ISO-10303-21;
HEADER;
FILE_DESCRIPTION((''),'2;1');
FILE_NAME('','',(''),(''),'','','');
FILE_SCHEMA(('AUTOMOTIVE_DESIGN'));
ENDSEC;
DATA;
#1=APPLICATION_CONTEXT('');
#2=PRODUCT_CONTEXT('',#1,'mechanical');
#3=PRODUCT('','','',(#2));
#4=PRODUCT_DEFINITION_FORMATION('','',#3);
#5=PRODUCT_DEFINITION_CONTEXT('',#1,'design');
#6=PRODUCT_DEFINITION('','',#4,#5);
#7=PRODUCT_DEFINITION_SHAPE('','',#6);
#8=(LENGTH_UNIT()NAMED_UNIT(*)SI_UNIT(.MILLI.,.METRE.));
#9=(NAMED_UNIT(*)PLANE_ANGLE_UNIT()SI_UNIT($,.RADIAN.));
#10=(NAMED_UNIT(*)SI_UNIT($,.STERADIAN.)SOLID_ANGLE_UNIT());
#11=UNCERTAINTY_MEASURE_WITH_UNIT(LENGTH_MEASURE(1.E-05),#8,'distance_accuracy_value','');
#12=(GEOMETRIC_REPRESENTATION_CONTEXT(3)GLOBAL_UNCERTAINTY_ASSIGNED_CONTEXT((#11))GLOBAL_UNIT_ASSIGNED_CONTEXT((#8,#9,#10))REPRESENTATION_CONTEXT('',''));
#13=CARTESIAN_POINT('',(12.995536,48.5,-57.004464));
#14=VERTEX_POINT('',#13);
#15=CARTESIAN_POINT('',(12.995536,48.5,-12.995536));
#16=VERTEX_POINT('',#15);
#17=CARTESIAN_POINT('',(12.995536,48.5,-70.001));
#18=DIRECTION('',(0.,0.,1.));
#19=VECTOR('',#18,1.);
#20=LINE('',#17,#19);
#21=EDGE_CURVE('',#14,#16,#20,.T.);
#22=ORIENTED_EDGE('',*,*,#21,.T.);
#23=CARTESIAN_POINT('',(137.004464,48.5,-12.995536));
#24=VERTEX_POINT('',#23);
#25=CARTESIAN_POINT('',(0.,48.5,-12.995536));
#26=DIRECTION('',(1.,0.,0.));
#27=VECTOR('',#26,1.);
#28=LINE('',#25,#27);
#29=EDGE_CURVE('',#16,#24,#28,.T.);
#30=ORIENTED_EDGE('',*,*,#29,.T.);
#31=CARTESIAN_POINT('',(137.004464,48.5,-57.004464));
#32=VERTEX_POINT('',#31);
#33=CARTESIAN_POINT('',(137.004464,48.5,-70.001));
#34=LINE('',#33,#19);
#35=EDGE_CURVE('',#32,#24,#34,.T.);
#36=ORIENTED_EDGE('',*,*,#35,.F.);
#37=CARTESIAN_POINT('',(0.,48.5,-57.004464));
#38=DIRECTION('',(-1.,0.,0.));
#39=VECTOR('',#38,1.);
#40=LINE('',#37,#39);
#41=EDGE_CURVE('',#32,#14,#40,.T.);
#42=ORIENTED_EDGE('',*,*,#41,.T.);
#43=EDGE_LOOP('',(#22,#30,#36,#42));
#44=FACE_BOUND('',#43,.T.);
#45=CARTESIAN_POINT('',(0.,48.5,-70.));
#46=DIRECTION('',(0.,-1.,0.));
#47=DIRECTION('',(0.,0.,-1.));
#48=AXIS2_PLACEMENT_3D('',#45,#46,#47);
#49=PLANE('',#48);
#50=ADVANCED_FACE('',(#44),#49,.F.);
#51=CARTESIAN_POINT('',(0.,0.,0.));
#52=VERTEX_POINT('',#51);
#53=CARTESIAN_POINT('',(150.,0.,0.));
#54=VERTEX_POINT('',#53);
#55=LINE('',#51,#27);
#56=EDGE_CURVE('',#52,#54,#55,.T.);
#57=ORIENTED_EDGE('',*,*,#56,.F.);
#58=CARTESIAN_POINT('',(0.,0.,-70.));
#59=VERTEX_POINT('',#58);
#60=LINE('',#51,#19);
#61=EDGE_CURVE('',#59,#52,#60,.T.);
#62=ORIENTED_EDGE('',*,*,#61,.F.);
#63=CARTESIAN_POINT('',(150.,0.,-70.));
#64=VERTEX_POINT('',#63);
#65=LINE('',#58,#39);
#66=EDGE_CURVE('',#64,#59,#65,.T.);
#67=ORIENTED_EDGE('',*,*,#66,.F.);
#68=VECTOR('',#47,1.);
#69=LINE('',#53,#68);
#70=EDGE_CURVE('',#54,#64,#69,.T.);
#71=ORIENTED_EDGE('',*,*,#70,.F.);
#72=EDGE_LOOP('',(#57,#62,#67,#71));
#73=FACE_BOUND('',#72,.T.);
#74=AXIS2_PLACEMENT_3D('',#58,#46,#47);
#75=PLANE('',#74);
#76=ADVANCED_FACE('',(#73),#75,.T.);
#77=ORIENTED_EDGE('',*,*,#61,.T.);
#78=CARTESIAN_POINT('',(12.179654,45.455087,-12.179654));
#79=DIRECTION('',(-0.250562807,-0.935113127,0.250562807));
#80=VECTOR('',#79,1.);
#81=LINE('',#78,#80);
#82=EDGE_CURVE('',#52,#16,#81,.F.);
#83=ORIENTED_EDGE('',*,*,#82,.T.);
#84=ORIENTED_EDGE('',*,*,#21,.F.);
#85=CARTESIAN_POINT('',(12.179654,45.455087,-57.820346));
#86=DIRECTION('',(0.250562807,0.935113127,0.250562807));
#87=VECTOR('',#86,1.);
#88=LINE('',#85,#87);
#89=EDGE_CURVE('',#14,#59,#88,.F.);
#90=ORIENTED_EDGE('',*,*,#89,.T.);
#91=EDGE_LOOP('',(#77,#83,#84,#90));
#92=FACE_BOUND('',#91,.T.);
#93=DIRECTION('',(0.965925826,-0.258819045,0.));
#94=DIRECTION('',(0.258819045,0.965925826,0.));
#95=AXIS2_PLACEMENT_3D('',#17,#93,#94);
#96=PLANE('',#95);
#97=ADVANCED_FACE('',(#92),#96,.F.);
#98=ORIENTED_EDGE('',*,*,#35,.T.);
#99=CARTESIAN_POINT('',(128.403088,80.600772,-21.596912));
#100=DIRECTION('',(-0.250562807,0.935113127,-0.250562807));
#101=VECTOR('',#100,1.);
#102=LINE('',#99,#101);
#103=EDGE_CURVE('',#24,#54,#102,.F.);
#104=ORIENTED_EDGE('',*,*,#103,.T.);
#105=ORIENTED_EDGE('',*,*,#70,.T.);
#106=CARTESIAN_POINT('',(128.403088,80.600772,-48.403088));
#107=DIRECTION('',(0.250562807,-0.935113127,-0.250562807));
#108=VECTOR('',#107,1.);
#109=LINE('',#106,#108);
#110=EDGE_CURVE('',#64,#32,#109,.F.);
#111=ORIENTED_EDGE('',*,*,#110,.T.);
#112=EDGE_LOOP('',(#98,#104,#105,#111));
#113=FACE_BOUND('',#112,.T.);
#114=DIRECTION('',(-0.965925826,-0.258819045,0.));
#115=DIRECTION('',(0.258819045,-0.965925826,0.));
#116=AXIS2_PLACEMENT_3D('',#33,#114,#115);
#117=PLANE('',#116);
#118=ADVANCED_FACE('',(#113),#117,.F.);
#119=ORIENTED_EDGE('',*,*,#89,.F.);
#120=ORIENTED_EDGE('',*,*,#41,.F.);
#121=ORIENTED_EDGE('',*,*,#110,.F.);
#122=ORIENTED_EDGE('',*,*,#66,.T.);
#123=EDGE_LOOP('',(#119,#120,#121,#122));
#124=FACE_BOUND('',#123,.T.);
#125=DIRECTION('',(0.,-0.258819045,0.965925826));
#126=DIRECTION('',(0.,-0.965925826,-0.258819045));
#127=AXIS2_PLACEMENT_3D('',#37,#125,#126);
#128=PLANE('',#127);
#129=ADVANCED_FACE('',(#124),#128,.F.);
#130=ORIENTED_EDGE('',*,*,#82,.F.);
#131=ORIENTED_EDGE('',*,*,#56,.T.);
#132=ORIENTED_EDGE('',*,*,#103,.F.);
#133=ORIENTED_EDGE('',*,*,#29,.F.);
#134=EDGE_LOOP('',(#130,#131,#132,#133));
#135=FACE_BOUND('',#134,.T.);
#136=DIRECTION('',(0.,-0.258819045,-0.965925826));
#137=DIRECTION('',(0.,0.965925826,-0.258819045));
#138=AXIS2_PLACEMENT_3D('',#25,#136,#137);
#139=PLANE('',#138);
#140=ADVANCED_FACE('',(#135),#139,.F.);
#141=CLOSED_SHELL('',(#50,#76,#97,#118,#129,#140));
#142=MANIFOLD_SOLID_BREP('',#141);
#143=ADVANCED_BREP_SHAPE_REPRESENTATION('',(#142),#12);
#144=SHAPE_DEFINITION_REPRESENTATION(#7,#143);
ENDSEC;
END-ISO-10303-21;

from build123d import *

# Parameters (mm, degrees)
ESQUISSE2_W      = 150
ESQUISSE2_H      = 70
EXTRUSION1_DEPTH = 48.5
EXTRUSION2_REACH = 174.488
CHANFREIN1_SIZE2 = 48.5
CHANFREIN1_SIZE  = 12.995535833
CHANFREIN2_SIZE2 = 48.5
CHANFREIN2_SIZE  = 12.995535833


with BuildPart() as part:
    # Esquisse2 → Extrusion1 (new body)
    with BuildSketch(Plane(origin=(0, 0, 0), x_dir=(1, 0, 0), z_dir=(0, 1, 0))):
        with Locations((75, 35)):
            Rectangle(ESQUISSE2_W, ESQUISSE2_H)
    extrude(amount=EXTRUSION1_DEPTH)

    # Esquisse3 → Extrusion2 (cut, up to next)
    with BuildSketch(Plane.XY, mode=Mode.PRIVATE) as extrusion2_sk1:
        Polygon((0, 0), (0, 48.5), (12.995535833, 48.5), align=None)
    extrusion2_tool1 = extrude(extrusion2_sk1.sketch, amount=-EXTRUSION2_REACH, mode=Mode.PRIVATE) & part.part
    # Esquisse3 → Extrusion2 (cut, up to next)
    with BuildSketch(Plane.XY, mode=Mode.PRIVATE) as extrusion2_sk2:
        Polygon((137.004464167, 48.5), (150, 0), (150, 48.5), align=None)
    extrusion2_tool2 = extrude(extrusion2_sk2.sketch, amount=-EXTRUSION2_REACH, mode=Mode.PRIVATE) & part.part
    add(extrusion2_tool1.solids().sort_by_distance((4.331845, 32.333333, 0))[0], mode=Mode.SUBTRACT)
    add(extrusion2_tool2.solids().sort_by_distance((145.668155, 32.333333, 0))[0], mode=Mode.SUBTRACT)

    # Chanfrein1
    chanfrein1_edges = [part.edges().sort_by_distance(p)[0] for p in [
        (75, 48.5, -70),
    ]]
    chanfrein1_side = [part.faces().sort_by_distance(p)[0] for p in [
        (75, 48.5, -69.740089283),
    ]]
    chamfer(chanfrein1_edges, length=CHANFREIN1_SIZE - 0.0001, length2=CHANFREIN1_SIZE2 - 0.0001, reference=chanfrein1_side[0])  # a hair under: the kernel refuses the full size

    # Chanfrein2
    chanfrein2_edges = [part.edges().sort_by_distance(p)[0] for p in [
        (75, 48.5, 0),
    ]]
    chanfrein2_side = [part.faces().sort_by_distance(p)[0] for p in [
        (75, 48.5, -0.259910717),
    ]]
    chamfer(chanfrein2_edges, length=CHANFREIN2_SIZE - 0.0001, length2=CHANFREIN2_SIZE2 - 0.0001, reference=chanfrein2_side[0])  # a hair under: the kernel refuses the full size


solid = part.part
